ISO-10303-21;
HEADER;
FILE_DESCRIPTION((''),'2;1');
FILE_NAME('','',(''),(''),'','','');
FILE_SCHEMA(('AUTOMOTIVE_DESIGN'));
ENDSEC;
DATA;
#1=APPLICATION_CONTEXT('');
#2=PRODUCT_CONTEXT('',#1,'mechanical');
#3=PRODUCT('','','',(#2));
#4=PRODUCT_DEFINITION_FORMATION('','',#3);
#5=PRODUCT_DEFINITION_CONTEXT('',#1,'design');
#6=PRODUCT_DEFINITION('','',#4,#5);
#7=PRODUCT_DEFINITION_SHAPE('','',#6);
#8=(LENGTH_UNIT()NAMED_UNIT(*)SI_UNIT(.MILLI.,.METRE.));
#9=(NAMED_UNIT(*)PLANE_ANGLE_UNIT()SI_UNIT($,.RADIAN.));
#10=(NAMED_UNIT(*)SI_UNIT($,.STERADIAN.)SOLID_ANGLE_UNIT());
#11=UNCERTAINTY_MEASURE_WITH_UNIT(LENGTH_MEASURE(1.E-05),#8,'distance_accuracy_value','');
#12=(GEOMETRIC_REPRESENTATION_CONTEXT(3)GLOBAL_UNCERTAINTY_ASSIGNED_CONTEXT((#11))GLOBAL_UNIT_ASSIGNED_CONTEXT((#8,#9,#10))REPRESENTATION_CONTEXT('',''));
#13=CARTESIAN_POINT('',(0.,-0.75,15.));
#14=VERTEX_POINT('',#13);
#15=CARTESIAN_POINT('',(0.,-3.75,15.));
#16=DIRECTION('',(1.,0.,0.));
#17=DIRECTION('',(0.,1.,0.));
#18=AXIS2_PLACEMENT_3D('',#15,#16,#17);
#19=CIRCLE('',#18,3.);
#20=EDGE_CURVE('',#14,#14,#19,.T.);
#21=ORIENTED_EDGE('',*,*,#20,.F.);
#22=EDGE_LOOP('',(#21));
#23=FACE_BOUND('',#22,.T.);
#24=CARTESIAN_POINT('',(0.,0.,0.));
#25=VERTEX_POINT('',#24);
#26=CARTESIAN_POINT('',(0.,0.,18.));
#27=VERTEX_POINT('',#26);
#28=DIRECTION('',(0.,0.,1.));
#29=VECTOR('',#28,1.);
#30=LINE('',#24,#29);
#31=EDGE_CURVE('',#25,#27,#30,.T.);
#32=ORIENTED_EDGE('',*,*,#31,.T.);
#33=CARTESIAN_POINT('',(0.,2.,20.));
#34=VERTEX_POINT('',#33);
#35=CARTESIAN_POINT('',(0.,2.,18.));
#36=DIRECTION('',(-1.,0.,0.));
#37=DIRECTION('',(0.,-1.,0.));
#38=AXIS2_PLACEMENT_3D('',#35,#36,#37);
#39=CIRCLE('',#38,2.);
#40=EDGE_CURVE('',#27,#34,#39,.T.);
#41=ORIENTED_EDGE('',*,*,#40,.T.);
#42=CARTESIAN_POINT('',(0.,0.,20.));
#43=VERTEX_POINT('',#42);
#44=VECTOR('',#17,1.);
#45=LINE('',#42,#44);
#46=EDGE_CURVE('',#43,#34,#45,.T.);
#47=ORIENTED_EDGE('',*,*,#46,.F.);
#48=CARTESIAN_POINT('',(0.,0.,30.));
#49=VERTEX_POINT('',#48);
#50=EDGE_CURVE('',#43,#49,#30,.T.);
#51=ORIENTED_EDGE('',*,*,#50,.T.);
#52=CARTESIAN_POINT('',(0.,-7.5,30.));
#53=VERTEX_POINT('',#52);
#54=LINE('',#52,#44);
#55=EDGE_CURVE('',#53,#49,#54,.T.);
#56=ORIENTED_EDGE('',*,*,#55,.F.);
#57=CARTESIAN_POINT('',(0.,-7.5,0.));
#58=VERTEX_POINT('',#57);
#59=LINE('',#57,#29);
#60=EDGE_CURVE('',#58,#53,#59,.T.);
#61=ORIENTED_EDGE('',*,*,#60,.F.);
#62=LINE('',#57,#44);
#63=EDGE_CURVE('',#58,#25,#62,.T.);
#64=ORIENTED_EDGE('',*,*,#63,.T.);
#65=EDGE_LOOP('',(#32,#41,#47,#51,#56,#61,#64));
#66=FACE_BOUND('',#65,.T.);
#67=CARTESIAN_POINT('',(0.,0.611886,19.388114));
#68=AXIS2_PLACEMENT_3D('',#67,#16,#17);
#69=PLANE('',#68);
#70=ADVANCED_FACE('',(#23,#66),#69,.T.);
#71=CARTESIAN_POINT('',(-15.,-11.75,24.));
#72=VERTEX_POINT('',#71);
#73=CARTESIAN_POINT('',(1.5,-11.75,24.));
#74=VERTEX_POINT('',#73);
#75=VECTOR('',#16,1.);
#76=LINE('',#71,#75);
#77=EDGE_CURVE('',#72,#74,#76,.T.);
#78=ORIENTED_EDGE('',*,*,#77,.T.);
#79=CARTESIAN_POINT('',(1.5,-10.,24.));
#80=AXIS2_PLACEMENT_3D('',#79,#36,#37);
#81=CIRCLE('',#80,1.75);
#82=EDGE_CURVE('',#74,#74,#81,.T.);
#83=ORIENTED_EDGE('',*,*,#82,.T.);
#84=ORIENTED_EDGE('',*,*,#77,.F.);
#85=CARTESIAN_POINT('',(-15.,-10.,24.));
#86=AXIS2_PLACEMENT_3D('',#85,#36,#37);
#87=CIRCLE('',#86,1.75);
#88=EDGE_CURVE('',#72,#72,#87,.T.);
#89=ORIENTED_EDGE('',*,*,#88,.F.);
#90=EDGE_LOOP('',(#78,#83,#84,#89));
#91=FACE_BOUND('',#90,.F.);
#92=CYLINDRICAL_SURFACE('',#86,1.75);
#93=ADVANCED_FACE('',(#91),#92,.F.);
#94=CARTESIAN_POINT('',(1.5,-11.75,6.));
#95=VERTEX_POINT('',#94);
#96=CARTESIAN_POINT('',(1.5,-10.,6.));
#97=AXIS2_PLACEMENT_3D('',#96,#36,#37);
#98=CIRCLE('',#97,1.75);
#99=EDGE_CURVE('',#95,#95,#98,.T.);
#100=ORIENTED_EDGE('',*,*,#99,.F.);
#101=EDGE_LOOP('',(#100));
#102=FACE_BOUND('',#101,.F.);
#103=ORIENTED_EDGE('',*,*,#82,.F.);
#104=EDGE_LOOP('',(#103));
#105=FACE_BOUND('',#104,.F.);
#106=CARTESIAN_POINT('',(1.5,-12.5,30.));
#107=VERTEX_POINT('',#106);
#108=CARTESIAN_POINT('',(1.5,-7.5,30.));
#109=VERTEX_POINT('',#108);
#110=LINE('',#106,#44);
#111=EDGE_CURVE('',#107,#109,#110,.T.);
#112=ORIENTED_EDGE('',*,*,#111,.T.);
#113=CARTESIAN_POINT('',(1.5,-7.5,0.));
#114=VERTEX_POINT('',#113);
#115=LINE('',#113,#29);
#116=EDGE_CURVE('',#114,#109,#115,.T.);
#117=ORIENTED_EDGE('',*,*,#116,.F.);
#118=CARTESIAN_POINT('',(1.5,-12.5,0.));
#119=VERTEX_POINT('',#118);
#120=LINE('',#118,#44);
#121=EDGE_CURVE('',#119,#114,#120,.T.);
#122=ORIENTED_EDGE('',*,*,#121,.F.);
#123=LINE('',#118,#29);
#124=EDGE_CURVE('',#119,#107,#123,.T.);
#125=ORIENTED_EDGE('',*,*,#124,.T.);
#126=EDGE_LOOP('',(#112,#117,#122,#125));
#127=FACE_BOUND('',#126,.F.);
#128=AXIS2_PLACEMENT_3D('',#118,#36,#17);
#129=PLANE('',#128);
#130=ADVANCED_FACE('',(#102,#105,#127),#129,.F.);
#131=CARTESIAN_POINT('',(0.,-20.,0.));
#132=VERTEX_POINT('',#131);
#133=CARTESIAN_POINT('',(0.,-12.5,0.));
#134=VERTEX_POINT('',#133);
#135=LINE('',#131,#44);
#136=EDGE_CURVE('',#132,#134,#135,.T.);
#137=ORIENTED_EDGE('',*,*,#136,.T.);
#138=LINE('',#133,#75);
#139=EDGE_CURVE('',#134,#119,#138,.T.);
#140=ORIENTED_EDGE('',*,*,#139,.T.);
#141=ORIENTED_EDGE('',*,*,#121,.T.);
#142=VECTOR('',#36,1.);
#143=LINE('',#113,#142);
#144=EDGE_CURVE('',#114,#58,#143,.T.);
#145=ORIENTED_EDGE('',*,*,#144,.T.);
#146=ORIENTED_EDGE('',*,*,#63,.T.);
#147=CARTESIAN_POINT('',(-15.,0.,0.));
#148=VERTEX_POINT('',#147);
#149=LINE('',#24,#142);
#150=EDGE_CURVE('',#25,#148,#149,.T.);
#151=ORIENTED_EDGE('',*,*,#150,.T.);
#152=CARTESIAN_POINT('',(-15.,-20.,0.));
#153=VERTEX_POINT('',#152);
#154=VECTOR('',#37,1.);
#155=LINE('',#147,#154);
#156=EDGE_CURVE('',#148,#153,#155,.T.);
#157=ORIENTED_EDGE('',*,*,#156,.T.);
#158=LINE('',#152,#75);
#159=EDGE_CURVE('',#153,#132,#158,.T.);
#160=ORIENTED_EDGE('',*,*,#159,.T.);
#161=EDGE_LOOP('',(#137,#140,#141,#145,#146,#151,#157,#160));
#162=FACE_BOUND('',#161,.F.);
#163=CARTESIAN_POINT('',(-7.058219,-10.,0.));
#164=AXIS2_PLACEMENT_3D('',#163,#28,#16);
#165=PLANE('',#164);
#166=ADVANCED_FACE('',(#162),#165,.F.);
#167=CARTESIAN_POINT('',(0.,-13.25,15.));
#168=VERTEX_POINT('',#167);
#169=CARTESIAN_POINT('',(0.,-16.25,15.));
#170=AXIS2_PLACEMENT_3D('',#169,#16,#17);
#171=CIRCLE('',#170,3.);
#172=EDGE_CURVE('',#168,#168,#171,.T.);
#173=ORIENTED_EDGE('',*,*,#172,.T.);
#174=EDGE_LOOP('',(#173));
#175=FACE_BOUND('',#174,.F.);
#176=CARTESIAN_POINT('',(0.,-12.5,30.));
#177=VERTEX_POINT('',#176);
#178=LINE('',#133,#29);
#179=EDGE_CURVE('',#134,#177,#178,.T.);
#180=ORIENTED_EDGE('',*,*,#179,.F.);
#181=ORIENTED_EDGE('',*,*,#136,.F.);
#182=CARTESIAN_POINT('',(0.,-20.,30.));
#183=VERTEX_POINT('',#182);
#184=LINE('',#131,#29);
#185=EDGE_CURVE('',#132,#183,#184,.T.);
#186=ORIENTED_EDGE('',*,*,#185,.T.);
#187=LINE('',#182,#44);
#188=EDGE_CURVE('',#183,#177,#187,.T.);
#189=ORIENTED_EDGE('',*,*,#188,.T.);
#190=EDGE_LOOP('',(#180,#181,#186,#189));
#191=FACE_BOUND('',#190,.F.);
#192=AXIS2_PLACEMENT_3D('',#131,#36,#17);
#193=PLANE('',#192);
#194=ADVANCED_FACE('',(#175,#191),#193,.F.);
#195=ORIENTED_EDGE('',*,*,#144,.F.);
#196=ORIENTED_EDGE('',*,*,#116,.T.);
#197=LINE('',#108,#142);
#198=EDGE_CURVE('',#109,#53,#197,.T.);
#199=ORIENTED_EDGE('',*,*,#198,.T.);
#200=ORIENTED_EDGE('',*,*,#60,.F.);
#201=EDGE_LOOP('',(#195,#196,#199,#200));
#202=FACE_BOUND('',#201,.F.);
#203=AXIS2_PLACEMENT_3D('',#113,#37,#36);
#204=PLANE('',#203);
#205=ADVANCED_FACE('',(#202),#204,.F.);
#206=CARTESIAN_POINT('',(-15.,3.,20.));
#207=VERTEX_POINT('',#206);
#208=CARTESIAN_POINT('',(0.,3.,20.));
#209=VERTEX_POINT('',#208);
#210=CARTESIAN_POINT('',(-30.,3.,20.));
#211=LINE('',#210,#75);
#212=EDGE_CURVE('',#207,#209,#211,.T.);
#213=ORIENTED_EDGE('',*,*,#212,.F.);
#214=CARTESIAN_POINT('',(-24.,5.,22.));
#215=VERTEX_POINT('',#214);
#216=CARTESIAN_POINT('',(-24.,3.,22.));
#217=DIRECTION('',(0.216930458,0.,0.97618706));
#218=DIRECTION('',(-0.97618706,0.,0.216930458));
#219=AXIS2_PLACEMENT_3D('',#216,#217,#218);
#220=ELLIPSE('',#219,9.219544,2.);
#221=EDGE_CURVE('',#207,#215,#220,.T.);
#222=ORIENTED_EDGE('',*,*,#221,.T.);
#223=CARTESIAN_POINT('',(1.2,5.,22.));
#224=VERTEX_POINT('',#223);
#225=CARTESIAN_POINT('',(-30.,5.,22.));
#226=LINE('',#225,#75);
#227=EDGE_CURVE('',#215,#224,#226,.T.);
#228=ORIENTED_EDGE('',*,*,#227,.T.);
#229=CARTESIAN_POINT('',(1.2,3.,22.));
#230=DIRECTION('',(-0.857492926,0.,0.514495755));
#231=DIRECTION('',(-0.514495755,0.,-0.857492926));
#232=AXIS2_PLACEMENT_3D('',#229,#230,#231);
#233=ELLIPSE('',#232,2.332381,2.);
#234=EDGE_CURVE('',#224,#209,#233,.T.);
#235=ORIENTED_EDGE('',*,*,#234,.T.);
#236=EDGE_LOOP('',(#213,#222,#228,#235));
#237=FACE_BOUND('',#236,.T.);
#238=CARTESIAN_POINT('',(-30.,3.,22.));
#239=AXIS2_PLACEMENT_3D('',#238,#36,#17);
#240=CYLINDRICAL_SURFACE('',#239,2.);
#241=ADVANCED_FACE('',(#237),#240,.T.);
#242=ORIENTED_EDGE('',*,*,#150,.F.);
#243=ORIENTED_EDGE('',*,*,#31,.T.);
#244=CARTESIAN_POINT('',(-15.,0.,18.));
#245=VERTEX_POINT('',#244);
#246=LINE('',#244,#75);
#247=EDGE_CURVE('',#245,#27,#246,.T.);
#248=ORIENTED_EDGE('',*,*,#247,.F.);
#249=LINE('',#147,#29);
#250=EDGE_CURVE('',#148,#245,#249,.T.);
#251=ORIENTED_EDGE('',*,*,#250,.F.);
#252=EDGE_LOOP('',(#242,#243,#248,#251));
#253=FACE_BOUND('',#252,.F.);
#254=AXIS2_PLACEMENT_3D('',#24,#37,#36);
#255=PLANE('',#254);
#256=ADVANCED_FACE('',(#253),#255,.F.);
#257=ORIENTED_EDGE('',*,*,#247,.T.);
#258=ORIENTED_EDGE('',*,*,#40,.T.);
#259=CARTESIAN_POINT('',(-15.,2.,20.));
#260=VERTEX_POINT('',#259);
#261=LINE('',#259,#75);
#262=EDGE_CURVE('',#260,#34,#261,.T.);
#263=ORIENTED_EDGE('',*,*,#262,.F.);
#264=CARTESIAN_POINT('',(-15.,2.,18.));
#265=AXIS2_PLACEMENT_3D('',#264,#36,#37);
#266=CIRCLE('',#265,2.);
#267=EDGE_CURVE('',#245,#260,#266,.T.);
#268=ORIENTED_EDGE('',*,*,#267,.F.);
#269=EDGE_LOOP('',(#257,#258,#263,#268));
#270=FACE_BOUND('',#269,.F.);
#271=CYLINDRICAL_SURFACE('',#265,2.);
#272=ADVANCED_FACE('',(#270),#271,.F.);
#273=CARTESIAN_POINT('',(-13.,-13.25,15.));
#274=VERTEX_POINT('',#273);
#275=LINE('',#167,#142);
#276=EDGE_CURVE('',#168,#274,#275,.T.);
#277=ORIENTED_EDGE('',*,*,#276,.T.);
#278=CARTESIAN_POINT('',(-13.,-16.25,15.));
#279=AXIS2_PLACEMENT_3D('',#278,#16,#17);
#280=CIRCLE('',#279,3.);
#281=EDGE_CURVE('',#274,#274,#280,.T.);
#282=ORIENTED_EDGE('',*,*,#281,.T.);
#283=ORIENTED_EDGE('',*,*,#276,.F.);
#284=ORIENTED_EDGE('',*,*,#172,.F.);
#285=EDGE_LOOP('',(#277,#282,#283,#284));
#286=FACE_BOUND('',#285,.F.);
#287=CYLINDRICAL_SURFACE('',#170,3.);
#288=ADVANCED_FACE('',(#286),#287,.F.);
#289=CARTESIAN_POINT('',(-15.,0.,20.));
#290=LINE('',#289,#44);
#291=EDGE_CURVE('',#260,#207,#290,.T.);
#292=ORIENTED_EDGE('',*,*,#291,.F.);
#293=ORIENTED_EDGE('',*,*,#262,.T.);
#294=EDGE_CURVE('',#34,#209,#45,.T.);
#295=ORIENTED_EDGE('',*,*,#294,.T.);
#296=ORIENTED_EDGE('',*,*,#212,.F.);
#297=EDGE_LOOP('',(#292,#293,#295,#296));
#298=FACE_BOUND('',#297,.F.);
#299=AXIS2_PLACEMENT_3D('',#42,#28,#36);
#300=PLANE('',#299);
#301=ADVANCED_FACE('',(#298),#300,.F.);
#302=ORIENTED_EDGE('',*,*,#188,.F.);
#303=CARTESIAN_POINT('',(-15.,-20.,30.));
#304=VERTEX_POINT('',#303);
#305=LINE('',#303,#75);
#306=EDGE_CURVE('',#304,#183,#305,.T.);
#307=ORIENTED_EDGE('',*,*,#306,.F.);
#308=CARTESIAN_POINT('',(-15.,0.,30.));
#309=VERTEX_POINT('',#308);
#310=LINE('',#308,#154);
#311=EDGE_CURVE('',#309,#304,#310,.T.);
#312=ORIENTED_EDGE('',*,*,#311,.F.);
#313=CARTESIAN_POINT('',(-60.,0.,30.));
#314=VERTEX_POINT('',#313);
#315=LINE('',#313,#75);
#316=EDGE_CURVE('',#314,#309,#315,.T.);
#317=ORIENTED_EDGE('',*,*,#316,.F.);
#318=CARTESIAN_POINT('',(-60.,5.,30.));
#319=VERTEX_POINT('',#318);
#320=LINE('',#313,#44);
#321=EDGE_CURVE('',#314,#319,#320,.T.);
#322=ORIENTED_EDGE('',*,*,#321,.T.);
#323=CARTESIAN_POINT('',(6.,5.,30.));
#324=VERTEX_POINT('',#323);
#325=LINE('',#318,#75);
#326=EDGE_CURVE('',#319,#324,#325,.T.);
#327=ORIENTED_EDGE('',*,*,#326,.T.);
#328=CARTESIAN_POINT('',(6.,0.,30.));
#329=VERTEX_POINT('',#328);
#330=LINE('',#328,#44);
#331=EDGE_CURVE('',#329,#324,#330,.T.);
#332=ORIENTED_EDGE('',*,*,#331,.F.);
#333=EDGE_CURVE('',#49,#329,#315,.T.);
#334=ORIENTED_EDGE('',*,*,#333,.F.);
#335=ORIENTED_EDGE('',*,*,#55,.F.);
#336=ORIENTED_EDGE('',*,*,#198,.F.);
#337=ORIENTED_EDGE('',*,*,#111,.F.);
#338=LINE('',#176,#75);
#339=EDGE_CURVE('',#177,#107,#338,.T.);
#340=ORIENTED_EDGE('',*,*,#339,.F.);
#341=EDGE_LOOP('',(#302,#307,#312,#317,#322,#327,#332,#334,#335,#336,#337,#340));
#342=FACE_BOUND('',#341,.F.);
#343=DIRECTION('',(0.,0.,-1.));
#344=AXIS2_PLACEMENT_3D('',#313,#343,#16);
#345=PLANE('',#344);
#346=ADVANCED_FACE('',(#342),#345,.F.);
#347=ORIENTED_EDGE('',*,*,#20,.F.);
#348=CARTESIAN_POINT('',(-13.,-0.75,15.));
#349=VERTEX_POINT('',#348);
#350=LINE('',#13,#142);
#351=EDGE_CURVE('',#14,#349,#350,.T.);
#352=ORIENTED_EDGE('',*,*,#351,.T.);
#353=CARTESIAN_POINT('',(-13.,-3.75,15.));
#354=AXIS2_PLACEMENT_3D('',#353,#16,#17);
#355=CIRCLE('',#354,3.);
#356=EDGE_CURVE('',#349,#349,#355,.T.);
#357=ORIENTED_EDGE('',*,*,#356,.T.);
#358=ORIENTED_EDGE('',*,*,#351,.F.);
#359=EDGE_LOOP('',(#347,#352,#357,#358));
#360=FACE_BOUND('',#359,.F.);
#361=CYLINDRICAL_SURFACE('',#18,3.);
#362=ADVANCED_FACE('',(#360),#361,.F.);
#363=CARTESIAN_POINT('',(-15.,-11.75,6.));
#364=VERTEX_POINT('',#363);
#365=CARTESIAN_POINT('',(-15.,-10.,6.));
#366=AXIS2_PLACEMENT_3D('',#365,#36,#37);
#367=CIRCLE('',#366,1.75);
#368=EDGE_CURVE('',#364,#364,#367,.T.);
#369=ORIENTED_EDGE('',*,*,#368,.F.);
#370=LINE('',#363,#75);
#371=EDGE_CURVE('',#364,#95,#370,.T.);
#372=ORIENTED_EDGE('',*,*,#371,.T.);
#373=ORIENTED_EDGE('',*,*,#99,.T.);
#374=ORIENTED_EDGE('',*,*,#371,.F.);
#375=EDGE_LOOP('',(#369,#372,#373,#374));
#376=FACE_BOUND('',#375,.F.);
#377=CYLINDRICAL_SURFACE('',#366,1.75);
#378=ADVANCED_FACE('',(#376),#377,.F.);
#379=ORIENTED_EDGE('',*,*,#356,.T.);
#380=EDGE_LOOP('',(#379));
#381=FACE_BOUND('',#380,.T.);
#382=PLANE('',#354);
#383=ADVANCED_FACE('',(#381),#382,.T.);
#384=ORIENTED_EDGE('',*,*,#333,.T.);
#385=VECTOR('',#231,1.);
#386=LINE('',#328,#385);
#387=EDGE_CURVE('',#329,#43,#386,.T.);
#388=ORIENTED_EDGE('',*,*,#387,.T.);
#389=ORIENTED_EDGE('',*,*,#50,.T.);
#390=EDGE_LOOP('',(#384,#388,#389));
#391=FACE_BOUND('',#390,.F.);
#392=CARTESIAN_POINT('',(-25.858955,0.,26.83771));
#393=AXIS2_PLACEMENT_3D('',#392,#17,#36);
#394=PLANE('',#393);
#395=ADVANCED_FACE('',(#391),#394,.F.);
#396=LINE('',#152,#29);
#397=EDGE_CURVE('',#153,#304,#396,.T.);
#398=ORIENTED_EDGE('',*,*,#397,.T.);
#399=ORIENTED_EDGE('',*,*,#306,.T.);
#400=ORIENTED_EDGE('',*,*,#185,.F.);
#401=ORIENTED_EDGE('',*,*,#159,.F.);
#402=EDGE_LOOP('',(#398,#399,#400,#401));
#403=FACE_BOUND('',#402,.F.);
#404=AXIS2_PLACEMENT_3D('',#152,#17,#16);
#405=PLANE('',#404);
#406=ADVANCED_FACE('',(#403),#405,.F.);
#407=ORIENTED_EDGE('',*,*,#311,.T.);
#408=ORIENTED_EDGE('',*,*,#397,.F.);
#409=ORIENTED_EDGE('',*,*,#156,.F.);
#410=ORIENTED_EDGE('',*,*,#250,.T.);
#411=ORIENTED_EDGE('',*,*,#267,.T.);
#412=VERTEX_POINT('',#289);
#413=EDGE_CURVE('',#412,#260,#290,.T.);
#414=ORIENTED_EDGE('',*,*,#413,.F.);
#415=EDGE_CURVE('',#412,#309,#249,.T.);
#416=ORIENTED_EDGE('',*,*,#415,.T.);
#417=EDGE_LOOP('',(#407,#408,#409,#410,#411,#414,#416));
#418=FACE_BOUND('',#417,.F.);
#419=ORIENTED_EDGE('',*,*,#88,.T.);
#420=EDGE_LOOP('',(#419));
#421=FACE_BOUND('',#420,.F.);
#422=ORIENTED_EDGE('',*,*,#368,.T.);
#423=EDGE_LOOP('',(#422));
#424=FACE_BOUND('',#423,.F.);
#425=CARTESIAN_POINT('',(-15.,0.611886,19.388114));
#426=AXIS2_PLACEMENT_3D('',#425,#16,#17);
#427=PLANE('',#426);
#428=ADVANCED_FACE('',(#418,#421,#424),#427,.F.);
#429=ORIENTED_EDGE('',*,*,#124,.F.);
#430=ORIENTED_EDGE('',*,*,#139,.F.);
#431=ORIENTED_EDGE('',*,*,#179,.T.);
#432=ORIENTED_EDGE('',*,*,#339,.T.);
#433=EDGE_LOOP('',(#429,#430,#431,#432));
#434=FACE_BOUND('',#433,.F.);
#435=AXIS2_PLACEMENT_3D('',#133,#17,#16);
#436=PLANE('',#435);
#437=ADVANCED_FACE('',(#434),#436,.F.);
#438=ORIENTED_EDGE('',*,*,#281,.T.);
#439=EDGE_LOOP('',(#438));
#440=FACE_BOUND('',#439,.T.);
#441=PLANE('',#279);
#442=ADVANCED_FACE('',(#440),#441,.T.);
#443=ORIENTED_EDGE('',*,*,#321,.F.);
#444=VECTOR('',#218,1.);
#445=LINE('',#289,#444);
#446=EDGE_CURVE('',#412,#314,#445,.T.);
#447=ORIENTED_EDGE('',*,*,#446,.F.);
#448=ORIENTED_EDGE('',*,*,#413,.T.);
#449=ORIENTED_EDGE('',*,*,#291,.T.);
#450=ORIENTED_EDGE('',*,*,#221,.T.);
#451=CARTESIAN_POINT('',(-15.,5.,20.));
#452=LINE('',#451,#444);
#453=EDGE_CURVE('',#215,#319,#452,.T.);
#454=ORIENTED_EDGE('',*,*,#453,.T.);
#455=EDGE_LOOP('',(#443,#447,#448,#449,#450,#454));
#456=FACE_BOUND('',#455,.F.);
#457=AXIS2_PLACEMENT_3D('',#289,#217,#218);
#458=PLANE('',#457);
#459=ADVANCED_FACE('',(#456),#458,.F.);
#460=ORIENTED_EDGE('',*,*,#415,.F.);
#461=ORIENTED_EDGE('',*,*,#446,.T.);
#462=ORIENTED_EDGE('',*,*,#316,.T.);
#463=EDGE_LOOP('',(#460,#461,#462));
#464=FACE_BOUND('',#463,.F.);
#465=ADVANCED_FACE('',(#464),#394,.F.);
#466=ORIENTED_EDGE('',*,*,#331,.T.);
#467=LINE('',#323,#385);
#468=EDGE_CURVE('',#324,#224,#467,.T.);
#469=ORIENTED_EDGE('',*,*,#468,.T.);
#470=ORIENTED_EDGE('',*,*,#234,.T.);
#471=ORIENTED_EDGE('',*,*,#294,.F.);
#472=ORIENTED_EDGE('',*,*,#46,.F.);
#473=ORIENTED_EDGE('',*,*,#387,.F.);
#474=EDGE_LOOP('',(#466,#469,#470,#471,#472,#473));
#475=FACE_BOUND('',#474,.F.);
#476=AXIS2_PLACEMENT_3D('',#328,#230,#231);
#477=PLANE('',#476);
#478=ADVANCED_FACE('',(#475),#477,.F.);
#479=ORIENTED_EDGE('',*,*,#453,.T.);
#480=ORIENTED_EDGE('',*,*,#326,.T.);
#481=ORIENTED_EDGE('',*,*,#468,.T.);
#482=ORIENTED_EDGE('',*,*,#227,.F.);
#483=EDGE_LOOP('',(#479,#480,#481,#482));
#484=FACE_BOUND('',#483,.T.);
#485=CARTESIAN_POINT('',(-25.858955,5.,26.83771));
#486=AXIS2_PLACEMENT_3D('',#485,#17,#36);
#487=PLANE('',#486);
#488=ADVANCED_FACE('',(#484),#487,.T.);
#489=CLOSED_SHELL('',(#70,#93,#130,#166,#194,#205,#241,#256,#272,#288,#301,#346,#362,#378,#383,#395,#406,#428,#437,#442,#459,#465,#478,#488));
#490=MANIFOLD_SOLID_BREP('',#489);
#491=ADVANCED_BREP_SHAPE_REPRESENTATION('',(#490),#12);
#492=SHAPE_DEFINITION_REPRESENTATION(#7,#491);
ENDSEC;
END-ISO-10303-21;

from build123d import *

# Parameters (mm, degrees)
F1_DEPTH     = 30
F2_R         = 1.75
F3_DEPTH     = 16.501
F4_R         = 3
F5_DEPTH     = 13
F6_R         = 3
F7_DEPTH     = 13
F9_DEPTH     = 5
F10_T1_DEPTH = 15
F10_T3_DEPTH = 35


# Not quite as in the source:
# - a fillet or chamfer that OpenCascade refuses, or shapes differently, is made with other operations: its cross-section is extruded or revolved along the edge and cut away or added


with BuildPart() as f1:
    # F0 (on Top) → F1 (new body)
    with BuildSketch(Plane.XY):
        Polygon((0, -7.5), (0, 0), (-15, 0), (-15, -20), (0, -20), (0, -12.5), (1.5, -12.5), (1.5, -7.5), align=None)
    extrude(amount=F1_DEPTH)

    # F2 (on face) → F3 (cut, through all)
    with BuildSketch(Plane(origin=(-15, 0, 0), x_dir=(0, -1, 0), z_dir=(-1, 0, 0))):
        with Locations((10, 24)):
            Circle(F2_R)
        with Locations((10, 6)):
            Circle(F2_R)
    extrude(amount=-F3_DEPTH, mode=Mode.SUBTRACT)

    # F4 (on face) → F5 (cut)
    with BuildSketch(Plane.YZ):
        with Locations((-16.25, 15)):
            Circle(F4_R)
    extrude(amount=-F5_DEPTH, mode=Mode.SUBTRACT)

    # F6 (on face) → F7 (cut)
    with BuildSketch(Plane.YZ):
        with Locations((-3.75, 15)):
            Circle(F6_R)
    extrude(amount=-F7_DEPTH, mode=Mode.SUBTRACT)

    # F8 (on face) → F9 (join)
    with BuildSketch(Plane(origin=(0, 0, 0), x_dir=(-1, 0, 0), z_dir=(0, 1, 0))):
        Polygon((60, 30), (15, 30), (-6, 30), (0, 20), (15, 20), align=None)
    extrude(amount=F9_DEPTH)

    # F10: fillet of radius 2 on 2 edges, made by hand

    # F10_s2 → F10_t1 (join)
    with BuildSketch(Plane.YZ.offset(-15)):
        with BuildLine():
            ThreePointArc((0, 18), (0.5857864376, 19.4142135624), (2, 20))
            Line((2, 20), (0, 20))
            Line((0, 20), (0, 18))
        make_face()
    extrude(amount=F10_T1_DEPTH)

    # F10_s4 → F10_t3 (cut)
    with BuildSketch(Plane.YZ.offset(-30)):
        with BuildLine():
            ThreePointArc((5, 22), (4.4142135624, 20.5857864376), (3, 20))
            Line((3, 20), (5, 20))
            Line((5, 20), (5, 22))
        make_face()
    extrude(amount=F10_T3_DEPTH, mode=Mode.SUBTRACT)


solid = f1.part
